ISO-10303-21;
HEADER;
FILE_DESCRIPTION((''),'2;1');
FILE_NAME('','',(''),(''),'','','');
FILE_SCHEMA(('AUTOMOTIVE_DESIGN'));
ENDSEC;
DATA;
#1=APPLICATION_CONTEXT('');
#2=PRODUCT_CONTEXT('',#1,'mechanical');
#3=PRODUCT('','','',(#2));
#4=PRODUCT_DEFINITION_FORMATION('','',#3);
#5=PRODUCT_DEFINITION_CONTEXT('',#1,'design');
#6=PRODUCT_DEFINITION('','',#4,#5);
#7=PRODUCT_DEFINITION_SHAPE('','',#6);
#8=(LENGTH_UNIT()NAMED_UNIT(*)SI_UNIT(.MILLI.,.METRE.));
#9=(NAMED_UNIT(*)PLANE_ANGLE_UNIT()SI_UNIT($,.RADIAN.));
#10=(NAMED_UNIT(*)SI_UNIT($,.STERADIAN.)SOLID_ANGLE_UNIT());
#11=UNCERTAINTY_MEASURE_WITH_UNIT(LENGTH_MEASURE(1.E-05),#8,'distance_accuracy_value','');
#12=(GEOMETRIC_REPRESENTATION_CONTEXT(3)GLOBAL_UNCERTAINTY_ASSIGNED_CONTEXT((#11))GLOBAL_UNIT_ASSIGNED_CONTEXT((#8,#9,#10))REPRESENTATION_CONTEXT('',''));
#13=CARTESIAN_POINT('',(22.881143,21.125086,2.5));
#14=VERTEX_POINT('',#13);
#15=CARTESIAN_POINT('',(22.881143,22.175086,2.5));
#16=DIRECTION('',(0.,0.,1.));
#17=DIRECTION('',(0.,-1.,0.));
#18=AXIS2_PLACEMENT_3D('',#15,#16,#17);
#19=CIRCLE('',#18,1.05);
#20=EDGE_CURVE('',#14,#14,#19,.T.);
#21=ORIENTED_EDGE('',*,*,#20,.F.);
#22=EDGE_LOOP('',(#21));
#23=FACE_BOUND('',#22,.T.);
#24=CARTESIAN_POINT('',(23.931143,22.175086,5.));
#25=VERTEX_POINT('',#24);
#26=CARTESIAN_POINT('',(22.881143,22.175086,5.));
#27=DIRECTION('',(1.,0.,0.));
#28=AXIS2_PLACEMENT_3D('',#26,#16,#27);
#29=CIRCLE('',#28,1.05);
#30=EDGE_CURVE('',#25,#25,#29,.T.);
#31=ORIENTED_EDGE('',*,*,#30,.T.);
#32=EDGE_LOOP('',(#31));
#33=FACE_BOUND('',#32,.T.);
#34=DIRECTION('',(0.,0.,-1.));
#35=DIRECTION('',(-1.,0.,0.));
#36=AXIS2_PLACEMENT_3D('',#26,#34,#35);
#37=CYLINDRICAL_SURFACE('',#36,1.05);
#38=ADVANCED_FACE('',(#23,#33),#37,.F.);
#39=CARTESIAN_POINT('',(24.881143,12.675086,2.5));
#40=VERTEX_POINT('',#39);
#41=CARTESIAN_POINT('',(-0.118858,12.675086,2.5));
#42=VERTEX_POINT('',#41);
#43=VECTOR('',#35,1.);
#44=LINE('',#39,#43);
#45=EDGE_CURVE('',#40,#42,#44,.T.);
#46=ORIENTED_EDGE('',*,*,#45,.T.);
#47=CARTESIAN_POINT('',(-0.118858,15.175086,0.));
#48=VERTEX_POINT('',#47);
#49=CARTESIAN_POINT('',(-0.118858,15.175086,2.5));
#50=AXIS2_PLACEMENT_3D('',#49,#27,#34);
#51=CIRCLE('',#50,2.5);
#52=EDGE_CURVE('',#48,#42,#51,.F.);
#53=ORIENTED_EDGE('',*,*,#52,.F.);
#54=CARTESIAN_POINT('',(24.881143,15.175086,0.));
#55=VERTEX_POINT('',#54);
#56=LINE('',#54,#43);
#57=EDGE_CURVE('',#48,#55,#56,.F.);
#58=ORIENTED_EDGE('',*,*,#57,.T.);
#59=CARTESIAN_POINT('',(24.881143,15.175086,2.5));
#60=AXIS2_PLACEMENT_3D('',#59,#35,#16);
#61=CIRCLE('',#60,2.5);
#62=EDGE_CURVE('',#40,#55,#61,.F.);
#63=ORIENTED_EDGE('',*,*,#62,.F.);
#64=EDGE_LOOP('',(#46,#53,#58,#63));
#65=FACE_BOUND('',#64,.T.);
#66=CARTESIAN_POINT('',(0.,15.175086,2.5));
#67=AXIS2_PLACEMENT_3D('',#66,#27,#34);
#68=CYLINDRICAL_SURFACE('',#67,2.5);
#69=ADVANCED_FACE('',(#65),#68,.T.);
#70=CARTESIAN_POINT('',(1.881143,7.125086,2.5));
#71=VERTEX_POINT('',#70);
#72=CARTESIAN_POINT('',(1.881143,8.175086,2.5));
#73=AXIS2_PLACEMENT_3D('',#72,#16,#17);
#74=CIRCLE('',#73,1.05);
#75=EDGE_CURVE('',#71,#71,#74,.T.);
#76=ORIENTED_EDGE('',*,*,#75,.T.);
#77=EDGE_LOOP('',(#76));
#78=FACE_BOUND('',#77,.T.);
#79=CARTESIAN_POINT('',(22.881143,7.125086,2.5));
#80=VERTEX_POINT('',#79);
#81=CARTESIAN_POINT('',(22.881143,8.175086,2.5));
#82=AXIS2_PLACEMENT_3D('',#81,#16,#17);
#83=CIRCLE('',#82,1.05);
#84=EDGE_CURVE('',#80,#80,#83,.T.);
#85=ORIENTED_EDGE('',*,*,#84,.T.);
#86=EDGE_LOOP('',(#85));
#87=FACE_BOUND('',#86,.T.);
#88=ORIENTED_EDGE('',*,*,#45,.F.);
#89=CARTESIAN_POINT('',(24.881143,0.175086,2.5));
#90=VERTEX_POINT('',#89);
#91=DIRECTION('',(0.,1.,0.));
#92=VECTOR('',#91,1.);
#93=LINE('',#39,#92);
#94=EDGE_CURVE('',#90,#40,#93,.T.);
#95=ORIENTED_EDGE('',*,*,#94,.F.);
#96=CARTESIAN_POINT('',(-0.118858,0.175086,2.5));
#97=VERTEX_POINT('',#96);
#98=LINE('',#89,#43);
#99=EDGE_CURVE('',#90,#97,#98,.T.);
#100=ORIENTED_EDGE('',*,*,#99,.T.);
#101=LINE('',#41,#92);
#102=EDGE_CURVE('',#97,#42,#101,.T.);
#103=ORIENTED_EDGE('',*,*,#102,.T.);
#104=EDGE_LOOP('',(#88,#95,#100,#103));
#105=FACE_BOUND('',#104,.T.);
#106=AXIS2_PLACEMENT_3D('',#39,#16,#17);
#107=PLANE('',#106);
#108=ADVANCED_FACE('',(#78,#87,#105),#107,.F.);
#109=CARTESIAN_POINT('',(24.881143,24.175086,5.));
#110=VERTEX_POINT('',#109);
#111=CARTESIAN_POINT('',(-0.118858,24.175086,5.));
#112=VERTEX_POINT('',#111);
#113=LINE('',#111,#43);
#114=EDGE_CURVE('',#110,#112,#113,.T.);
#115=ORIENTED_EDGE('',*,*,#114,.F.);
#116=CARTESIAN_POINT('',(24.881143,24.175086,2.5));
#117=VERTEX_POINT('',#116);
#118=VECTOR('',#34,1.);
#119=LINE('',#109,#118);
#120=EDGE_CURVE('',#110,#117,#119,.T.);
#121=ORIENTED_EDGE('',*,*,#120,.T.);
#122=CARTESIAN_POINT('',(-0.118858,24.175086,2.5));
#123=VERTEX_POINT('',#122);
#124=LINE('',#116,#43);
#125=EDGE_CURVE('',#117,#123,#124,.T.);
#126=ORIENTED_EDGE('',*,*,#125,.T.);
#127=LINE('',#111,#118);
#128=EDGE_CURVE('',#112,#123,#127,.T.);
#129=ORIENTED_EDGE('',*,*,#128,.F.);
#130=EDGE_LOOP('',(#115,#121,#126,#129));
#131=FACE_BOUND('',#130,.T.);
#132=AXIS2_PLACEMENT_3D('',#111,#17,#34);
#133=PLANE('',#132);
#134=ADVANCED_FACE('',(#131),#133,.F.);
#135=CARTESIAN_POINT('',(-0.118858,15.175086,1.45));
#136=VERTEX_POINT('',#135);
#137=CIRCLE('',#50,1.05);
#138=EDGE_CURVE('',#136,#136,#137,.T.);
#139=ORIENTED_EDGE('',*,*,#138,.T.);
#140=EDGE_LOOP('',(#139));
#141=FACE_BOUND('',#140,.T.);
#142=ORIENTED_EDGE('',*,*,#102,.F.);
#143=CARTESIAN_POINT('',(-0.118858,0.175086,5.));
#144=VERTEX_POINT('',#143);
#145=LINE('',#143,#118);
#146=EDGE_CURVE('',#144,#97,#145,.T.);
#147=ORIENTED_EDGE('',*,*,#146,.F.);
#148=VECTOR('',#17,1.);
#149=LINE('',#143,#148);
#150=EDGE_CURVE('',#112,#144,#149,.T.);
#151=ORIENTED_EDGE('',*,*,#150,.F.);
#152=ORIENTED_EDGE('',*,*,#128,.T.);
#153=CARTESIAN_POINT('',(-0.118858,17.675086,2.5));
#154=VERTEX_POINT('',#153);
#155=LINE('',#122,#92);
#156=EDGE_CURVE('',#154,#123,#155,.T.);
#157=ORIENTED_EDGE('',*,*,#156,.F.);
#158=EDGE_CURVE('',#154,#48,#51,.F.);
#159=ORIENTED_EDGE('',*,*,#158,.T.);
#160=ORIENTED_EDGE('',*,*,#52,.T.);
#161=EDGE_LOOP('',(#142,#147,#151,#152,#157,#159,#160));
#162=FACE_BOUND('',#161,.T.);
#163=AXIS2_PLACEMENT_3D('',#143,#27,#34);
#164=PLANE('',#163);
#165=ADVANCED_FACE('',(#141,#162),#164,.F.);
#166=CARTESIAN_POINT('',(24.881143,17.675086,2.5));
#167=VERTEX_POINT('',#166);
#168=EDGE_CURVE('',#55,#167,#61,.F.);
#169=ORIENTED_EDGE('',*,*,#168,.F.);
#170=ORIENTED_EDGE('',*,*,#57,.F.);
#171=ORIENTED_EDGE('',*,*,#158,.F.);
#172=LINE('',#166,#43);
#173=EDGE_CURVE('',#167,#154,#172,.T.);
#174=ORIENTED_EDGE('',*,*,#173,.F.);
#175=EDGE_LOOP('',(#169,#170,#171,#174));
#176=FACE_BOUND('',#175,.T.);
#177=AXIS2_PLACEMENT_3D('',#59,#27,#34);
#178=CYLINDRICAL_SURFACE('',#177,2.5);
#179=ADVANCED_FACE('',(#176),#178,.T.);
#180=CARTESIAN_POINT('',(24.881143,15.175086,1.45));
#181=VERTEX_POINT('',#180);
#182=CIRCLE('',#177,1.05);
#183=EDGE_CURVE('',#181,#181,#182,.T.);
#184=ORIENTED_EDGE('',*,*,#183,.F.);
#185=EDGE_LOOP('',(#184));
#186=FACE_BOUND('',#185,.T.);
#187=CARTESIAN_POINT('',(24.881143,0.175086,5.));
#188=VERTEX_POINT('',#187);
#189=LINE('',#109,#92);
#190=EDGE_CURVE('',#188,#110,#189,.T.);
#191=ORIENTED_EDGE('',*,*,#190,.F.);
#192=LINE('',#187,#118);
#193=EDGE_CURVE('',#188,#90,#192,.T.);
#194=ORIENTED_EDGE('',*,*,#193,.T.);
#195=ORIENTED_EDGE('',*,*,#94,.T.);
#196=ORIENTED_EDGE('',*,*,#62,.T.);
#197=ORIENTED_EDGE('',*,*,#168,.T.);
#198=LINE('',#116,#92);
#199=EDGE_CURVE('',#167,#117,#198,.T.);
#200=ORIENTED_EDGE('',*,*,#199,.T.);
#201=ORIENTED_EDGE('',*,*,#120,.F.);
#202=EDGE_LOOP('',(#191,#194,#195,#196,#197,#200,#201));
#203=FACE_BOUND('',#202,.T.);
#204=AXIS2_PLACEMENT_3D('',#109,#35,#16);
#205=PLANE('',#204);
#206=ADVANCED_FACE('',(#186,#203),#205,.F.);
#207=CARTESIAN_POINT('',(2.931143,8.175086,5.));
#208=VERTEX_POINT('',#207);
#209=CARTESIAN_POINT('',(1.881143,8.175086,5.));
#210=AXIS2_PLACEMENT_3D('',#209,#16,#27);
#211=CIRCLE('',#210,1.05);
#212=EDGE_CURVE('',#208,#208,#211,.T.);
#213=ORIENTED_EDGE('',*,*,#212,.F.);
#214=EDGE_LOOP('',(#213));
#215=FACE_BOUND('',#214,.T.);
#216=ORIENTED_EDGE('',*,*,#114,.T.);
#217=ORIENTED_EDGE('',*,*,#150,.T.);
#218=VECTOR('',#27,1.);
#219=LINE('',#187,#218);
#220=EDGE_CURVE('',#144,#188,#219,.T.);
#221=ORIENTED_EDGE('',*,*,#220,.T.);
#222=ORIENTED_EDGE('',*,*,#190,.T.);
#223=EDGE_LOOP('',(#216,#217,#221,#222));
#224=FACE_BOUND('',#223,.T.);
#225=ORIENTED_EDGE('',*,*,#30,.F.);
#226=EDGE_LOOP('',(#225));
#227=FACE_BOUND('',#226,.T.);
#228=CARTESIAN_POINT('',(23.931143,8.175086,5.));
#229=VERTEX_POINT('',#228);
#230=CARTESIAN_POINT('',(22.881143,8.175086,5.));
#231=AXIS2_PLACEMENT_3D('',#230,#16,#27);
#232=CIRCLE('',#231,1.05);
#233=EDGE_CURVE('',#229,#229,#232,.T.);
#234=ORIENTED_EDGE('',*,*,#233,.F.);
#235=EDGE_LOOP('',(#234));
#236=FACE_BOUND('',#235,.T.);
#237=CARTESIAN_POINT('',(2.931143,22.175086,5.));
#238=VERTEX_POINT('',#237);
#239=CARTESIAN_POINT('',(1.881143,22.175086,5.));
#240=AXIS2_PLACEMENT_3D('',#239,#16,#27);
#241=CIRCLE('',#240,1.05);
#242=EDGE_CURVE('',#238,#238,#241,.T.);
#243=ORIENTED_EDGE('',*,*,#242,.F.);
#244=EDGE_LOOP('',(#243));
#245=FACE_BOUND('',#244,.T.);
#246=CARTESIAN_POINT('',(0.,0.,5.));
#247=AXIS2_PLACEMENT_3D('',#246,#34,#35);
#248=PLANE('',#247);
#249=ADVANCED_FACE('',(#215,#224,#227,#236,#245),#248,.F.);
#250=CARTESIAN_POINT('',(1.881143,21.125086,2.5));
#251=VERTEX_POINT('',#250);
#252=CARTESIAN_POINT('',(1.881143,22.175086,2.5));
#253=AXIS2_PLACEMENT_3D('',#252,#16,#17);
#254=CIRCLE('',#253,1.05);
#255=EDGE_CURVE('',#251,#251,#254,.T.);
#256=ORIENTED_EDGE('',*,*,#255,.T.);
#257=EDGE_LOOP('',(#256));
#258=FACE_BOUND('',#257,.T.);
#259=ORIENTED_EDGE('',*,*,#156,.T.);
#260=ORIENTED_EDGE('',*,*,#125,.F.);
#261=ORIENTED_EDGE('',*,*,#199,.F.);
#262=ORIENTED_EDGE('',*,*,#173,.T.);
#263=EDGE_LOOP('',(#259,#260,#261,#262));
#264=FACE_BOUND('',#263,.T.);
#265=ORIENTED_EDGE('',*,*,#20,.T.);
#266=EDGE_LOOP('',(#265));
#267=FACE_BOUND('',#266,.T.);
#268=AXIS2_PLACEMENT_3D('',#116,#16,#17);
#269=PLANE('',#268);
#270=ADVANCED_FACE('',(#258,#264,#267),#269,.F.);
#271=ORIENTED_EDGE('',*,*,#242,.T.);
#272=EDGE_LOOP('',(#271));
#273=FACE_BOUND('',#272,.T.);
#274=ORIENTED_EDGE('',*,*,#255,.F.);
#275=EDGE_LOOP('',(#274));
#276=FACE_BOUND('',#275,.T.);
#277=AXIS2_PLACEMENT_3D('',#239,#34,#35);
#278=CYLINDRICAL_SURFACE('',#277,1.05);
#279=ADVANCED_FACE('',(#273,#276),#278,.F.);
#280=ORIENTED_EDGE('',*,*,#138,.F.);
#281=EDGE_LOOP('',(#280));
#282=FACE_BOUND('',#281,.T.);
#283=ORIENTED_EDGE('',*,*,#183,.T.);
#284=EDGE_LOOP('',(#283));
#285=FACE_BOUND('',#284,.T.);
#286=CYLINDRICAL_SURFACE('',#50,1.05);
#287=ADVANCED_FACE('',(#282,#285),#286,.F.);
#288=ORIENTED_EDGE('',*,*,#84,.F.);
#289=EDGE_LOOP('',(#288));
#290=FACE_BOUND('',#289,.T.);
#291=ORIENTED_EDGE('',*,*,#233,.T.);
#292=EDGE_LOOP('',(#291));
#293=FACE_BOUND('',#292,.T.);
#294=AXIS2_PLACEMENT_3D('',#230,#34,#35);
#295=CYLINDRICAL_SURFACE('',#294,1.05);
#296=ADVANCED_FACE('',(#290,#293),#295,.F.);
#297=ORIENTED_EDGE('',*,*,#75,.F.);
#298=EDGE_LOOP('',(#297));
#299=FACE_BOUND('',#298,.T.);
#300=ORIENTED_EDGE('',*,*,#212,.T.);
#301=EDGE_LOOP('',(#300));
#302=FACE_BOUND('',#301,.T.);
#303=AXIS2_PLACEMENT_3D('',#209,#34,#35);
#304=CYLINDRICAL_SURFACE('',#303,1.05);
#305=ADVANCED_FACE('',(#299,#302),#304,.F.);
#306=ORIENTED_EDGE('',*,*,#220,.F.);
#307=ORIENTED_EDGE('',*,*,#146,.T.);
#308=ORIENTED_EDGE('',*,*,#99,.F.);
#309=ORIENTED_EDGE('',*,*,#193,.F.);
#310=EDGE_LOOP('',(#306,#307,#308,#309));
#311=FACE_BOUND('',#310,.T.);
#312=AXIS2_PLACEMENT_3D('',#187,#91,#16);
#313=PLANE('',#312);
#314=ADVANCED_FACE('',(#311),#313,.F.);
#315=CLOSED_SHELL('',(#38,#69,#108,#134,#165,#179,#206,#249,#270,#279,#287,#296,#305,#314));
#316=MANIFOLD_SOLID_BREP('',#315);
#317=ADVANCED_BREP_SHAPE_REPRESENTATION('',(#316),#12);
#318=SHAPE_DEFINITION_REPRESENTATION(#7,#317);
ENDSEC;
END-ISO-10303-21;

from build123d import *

# Parameters (mm, degrees)
SZKIC2_W                    = 25.000000373
SZKIC2_H                    = 24
SZKIC2_R                    = 1.05
DODANIE_WYCI_GNI_CIE1_DEPTH = 5
SZKIC3_R                    = 1.05
WYTNIJ_WYCI_GNI_CIE1_DEPTH  = 36.134524248
SZKIC4_W                    = 2.5
SZKIC4_H                    = 6.5
SZKIC4_H_2                  = 12.5
WYTNIJ_WYCI_GNI_CIE2_DEPTH  = 36.134524248
ZAOKR_GLENIE5_R             = 2.5


with BuildPart() as part:
    # Szkic2 → Dodanie-wyciągnięcie1 (new body)
    with BuildSketch(Plane.XY):
        with Locations((12.381142653, 12.175085843)):
            Rectangle(SZKIC2_W, SZKIC2_H)
        with Locations((22.881142652, 22.175085947)):
            Circle(SZKIC2_R, mode=Mode.SUBTRACT)
        with Locations((22.881142652, 8.175085947)):
            Circle(SZKIC2_R, mode=Mode.SUBTRACT)
        with Locations((1.881142652, 22.175085947)):
            Circle(SZKIC2_R, mode=Mode.SUBTRACT)
        with Locations((1.881142652, 8.175085947)):
            Circle(SZKIC2_R, mode=Mode.SUBTRACT)
    extrude(amount=DODANIE_WYCI_GNI_CIE1_DEPTH)

    # Szkic3 → Wytnij-wyciągnięcie1 (cut, through all)
    with BuildSketch(Plane(origin=(24.881142839, 0, 0), x_dir=(0, 0, -1), z_dir=(1, 0, 0))):
        with Locations((-2.5, 15.175085843)):
            Circle(SZKIC3_R)
    extrude(amount=-WYTNIJ_WYCI_GNI_CIE1_DEPTH, mode=Mode.SUBTRACT)

    # Szkic4 → Wytnij-wyciągnięcie2 (cut, through all)
    with BuildSketch(Plane.ZY.offset(0.118857534)):
        with Locations((1.25, 20.925085843)):
            Rectangle(SZKIC4_W, SZKIC4_H)
        with Locations((1.25, 6.425085843)):
            Rectangle(SZKIC4_W, SZKIC4_H_2)
    extrude(amount=-WYTNIJ_WYCI_GNI_CIE2_DEPTH, mode=Mode.SUBTRACT)

    # Zaokrąglenie5
    zaokr_glenie5_edges = [part.edges().sort_by_distance(p)[0] for p in [
        (12.381142652, 12.675085843, 0),
        (12.381142652, 17.675085843, 0),
    ]]
    fillet(zaokr_glenie5_edges, radius=ZAOKR_GLENIE5_R - 0.0001)  # a hair under: the kernel refuses the full size


solid = part.part
